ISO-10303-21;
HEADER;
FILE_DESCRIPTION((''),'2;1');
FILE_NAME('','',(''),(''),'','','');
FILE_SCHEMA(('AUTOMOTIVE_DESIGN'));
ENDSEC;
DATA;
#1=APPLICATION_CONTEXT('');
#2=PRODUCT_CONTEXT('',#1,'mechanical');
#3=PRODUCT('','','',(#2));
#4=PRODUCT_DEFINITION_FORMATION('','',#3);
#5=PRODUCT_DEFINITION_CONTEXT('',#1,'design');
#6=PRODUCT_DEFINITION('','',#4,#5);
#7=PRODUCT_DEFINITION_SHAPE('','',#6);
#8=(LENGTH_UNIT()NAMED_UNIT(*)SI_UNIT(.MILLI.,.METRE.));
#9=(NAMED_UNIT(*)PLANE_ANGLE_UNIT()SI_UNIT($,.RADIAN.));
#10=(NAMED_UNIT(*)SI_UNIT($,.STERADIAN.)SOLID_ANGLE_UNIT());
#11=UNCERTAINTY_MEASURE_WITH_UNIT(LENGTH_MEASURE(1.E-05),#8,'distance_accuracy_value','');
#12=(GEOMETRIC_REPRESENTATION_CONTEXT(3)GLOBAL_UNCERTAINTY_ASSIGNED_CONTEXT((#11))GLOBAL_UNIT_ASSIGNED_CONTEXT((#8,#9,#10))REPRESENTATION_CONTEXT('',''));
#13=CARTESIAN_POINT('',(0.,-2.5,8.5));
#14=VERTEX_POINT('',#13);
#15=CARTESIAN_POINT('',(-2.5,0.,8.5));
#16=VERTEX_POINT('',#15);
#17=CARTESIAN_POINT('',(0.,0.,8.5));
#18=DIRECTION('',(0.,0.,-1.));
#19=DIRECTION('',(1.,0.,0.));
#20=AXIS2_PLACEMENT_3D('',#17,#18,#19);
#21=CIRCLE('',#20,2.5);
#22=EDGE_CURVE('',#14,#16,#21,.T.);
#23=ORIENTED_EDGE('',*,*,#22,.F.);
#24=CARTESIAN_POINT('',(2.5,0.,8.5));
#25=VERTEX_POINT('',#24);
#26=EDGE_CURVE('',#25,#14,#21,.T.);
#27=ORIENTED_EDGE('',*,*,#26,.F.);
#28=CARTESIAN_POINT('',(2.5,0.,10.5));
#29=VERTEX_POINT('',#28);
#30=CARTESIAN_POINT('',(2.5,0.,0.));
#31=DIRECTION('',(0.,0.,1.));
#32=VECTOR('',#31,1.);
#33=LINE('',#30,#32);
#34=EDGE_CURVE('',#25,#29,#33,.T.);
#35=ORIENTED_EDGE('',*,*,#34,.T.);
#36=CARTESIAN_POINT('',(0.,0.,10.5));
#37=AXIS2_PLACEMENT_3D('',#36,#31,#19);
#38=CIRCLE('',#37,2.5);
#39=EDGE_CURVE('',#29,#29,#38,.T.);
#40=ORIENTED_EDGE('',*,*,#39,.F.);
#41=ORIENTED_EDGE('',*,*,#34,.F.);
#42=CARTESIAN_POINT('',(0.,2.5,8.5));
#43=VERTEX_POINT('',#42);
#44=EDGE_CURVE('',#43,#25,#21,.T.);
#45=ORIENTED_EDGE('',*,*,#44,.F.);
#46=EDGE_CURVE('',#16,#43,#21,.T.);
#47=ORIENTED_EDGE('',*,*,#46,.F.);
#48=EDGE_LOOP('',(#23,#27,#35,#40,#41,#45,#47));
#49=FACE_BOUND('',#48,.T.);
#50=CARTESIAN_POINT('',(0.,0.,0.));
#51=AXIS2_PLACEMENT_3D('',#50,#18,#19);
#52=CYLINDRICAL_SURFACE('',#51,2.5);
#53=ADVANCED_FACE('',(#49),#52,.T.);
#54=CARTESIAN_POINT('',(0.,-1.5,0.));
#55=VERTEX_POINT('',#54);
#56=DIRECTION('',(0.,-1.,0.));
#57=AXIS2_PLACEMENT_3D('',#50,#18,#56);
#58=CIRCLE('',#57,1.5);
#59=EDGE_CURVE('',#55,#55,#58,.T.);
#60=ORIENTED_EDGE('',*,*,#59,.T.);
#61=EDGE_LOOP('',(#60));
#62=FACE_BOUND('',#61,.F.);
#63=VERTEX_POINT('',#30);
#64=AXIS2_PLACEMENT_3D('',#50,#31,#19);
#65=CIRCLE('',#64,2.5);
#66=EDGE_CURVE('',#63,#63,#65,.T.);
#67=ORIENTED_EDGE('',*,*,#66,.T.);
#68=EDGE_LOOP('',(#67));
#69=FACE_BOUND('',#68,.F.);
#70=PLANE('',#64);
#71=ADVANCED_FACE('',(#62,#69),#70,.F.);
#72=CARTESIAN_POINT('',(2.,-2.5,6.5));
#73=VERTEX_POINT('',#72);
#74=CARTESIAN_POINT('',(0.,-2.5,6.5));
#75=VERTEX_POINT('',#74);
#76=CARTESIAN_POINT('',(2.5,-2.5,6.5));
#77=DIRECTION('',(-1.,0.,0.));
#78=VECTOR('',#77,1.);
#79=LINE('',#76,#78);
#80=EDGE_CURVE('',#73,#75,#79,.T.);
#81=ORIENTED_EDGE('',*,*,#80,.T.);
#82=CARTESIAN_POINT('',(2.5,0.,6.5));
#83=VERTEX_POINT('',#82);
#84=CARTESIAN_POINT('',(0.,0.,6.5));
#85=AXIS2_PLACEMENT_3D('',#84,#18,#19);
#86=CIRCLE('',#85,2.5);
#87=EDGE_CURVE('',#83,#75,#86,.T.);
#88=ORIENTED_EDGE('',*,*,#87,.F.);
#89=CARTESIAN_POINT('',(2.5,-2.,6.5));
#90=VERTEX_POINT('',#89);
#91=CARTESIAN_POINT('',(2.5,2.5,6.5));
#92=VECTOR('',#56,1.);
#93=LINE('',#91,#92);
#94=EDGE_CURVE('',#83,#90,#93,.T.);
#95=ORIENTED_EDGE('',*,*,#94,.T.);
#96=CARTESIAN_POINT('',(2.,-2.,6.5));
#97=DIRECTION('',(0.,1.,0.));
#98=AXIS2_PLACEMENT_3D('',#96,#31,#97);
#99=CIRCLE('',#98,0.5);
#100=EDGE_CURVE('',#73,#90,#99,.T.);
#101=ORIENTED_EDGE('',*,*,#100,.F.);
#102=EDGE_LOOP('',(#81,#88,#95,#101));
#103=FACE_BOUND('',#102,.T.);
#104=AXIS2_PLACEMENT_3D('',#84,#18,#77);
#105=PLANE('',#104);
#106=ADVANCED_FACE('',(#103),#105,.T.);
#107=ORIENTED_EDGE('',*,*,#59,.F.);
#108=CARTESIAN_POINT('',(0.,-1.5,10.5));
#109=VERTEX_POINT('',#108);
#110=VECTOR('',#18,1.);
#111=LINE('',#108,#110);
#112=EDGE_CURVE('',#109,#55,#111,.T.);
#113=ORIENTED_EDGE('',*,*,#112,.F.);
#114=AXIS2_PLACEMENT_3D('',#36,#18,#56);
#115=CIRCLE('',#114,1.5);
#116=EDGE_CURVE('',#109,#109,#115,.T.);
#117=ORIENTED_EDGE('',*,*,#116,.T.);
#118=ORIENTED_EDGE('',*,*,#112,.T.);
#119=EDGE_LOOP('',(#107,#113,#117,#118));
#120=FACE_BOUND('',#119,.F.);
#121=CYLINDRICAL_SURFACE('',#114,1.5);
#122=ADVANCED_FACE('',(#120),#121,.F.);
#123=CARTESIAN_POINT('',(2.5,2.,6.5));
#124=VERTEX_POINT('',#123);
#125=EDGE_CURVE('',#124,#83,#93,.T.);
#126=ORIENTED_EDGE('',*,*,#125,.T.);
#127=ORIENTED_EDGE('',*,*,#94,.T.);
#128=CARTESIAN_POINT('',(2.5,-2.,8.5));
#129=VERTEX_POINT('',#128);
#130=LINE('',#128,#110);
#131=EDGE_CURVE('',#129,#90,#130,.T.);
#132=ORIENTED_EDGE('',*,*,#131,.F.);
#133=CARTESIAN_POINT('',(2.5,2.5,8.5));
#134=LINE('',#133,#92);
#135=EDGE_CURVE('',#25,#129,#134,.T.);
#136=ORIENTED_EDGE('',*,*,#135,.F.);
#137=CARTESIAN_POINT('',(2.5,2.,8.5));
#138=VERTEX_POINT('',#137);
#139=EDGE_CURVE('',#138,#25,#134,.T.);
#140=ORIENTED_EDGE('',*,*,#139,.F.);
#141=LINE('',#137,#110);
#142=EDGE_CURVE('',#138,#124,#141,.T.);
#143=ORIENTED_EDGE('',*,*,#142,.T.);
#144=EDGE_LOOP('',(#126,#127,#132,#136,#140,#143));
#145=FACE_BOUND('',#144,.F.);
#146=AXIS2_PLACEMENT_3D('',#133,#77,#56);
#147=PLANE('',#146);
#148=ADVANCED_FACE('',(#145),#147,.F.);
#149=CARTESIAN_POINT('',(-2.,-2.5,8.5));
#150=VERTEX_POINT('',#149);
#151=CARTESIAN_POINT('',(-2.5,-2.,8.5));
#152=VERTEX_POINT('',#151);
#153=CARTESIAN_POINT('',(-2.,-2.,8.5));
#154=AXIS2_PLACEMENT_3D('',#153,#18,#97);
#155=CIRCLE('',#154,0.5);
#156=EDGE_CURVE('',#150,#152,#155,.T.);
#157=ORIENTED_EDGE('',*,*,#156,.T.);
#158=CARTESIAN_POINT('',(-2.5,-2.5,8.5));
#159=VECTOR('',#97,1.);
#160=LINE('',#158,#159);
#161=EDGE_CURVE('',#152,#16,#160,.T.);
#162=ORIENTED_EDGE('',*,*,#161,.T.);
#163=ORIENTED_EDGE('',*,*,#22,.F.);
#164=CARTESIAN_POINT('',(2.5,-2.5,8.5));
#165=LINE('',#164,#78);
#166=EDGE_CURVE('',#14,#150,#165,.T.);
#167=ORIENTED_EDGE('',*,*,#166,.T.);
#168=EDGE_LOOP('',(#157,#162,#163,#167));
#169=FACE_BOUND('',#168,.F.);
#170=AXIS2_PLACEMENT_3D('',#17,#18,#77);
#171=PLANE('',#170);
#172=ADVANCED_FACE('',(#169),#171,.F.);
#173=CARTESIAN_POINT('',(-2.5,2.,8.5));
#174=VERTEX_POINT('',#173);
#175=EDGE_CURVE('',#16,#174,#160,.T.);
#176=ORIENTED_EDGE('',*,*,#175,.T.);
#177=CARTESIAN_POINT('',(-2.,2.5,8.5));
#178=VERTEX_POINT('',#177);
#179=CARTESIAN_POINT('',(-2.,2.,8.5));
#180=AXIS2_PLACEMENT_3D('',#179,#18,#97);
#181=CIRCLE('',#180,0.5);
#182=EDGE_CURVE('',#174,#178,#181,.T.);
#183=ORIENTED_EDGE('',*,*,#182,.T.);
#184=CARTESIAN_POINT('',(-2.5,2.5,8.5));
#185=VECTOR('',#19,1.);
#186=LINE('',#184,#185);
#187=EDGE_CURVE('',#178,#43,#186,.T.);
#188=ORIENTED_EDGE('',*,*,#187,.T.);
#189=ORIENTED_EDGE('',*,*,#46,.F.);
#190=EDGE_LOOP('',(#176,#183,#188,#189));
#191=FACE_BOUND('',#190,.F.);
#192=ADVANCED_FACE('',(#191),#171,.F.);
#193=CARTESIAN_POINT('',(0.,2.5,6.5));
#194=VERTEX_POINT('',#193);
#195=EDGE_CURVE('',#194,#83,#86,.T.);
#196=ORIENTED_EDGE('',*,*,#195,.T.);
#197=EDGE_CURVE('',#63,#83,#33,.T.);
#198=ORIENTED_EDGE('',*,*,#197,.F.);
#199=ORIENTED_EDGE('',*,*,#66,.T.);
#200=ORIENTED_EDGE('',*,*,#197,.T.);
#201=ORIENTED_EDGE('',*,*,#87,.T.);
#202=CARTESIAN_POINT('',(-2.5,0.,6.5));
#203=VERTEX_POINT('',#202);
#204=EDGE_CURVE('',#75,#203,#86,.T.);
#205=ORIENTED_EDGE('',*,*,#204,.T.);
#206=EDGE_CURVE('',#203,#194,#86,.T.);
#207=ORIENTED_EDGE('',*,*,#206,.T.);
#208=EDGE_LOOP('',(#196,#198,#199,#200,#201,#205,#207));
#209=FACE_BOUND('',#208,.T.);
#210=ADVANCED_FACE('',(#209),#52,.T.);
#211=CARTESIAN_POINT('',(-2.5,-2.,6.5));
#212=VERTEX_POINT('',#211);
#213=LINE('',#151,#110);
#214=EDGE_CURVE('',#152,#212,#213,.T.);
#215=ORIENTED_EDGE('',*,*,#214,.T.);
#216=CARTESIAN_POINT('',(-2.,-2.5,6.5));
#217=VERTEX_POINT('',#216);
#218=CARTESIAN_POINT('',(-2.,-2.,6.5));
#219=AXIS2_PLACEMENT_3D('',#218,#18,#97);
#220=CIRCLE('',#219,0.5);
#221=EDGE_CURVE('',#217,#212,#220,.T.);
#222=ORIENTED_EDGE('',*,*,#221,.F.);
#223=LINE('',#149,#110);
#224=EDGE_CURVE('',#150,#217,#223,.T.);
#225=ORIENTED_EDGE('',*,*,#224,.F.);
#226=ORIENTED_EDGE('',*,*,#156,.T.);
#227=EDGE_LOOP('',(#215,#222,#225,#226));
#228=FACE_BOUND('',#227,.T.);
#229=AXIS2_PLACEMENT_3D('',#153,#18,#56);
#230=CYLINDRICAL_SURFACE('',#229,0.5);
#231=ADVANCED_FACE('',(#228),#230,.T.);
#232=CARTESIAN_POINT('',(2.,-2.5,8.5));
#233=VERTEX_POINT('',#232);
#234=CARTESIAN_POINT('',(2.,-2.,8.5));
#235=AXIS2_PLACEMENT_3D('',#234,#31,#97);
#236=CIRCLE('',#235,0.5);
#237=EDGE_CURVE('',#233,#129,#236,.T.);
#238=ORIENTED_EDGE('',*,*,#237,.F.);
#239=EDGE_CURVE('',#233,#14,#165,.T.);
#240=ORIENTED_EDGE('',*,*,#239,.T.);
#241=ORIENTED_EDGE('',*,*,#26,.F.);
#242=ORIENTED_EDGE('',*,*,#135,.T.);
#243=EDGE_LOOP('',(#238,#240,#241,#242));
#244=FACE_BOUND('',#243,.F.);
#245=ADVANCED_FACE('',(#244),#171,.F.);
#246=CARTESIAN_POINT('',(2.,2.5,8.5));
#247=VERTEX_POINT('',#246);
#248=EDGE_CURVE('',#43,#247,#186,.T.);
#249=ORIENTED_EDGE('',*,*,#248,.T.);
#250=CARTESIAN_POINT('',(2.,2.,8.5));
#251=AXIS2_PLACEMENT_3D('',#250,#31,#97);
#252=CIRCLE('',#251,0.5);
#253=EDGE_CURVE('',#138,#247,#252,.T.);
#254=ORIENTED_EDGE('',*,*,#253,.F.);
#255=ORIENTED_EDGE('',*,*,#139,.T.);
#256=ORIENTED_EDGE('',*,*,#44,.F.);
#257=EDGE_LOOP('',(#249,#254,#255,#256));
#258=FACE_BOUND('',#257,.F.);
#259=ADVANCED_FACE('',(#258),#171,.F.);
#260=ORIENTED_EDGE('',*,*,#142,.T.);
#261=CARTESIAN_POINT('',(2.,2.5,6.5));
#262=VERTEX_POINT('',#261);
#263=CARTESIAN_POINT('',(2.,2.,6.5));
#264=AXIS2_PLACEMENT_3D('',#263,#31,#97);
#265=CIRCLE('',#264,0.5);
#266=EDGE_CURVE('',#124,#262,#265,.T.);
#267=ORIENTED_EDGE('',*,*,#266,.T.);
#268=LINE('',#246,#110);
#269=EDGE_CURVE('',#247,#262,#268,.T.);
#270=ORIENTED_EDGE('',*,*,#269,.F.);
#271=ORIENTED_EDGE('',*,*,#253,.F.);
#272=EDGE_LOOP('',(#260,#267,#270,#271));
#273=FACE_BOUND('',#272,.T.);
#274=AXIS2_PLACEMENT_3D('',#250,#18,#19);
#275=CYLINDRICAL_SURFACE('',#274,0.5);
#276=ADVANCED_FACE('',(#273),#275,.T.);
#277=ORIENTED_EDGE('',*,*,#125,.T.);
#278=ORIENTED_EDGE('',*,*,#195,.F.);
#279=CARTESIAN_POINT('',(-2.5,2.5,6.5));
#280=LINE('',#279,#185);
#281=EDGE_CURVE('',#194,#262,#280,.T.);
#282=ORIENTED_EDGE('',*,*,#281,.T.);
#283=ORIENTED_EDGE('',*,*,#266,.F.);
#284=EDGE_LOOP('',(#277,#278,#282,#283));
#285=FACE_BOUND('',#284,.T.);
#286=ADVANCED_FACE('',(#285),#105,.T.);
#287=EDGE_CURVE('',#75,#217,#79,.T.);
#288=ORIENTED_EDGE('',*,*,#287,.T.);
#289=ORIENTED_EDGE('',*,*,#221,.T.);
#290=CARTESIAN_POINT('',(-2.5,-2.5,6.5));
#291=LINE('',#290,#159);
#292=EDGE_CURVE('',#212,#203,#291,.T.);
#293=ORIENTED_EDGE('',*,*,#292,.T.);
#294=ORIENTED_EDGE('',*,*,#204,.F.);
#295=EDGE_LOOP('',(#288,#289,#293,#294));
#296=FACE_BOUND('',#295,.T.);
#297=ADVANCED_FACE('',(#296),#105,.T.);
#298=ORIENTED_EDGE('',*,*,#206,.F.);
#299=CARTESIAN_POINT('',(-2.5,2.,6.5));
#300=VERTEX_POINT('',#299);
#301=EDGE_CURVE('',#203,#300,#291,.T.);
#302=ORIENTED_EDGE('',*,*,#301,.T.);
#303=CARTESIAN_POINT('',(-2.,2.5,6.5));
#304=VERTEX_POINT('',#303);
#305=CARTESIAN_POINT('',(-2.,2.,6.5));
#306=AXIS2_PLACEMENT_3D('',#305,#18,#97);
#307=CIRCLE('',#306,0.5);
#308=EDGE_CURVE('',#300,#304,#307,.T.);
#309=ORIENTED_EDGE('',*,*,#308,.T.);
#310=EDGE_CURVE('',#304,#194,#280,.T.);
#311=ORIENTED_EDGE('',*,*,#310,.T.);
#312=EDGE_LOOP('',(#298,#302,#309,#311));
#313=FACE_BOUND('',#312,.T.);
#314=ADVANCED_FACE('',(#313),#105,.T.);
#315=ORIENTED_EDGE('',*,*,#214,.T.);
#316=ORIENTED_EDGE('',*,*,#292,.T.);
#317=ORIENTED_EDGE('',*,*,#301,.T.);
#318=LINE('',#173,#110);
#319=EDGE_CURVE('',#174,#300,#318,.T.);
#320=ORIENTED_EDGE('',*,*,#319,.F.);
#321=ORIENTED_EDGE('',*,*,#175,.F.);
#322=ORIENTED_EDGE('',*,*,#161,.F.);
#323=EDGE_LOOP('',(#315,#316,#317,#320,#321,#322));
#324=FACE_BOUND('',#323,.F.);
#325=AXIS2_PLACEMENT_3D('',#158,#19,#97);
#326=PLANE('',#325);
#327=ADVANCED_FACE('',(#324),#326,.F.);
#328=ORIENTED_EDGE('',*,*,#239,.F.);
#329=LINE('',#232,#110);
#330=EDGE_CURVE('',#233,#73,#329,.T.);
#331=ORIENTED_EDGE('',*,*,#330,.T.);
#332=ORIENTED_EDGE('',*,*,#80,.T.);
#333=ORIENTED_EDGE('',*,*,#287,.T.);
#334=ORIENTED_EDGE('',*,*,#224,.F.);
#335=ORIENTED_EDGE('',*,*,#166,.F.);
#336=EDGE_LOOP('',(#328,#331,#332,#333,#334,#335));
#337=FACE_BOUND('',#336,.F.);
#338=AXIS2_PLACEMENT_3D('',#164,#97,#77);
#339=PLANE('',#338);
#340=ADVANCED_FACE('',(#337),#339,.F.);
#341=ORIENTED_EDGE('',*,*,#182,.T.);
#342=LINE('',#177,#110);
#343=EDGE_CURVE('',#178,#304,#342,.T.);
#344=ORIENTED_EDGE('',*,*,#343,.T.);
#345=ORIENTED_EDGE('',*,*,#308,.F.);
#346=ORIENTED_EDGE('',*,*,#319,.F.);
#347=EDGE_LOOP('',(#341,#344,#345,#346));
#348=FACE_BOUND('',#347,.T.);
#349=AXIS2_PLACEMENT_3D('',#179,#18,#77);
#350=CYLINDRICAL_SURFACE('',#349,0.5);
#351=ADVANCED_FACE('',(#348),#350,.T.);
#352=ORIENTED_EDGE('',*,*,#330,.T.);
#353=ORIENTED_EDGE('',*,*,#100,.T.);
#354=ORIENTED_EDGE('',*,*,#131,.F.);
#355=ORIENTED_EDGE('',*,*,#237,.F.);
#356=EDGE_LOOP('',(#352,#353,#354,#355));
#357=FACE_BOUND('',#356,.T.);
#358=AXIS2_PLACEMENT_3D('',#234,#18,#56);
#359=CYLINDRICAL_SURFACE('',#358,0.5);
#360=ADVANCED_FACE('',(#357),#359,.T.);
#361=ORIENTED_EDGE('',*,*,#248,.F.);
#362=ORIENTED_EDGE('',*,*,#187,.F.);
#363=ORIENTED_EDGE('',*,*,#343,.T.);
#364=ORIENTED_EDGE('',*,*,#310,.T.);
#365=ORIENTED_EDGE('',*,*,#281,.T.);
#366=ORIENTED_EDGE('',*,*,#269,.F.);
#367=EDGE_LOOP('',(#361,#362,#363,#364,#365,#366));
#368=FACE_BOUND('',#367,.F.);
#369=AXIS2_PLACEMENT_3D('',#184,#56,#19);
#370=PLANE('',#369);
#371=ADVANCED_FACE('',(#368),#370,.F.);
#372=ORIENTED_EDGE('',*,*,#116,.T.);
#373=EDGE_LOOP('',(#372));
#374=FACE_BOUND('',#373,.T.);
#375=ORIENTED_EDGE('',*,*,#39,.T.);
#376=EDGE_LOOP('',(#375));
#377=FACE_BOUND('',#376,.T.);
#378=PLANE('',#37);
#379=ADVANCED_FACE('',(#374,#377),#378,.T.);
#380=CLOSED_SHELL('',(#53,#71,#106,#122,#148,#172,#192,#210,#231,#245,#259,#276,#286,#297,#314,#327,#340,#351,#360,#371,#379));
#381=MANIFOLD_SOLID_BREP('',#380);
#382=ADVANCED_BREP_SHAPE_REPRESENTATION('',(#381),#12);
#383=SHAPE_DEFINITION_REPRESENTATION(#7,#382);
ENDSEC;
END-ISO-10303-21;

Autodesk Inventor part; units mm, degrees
ref_plane "YZ Plane" through (0, 0, 0) normal (1, 0, 0) x (0, 1, 0)
ref_plane "XZ Plane" through (0, 0, 0) normal (0, 1, 0) x (-1, 0, 0)
sketch "Skizze1" plane through (0, 0, 0) normal (0, 0, 1) x (1, 0, 0)
  circle A0 centre (0, 0) radius 2.5
  dimension "d1" = 5
extrude "Extrusion1" add sketch "Skizze1" along normal blind 10.5
thread "Gewinde1" size "M5x0.8" class "6g" standard "ANSI Metric M Profile" length 4.5
sketch "Skizze2" plane through (0, 0, 10.5) normal (0, 0, 1) x (1, 0, 0)
  circle A0 centre (0, 0) radius 1.5 projected
ref_plane "Arbeitsebene1" through (0, 0, 8.5) normal (0, 0, -1) x (-1, 0, 0)
sketch "Skizze3" plane through (0, 0, 8.5) normal (0, 0, -1) x (-1, 0, 0)
  line L0 (-2.5, -2.5) -> (2.5, -2.5)
  line L1 (2.5, -2.5) -> (2.5, 2.5)
  line L2 (2.5, 2.5) -> (-2.5, 2.5)
  line L3 (-2.5, 2.5) -> (-2.5, -2.5)
  line L4 (-2.5, -2.5) -> (2.5, 2.5) construction
  line L5 (2.5, -2.5) -> (-2.5, 2.5) construction
  point P0 (0, 0)
extrude "Extrusion3" add sketch "Skizze3" along normal blind 2
fillet "Rundung2" radius 0.5 4 edges at (2.5, -2.5, 7.5) (2.5, 2.5, 7.5) (-2.5, -2.5, 7.5) (-2.5, 2.5, 7.5)
hole "Bohrung2" at (0, 0, 10.5) direction (0, 0, -1) diameter 3 end through all
properties part number "RadAdapterSchaft"
